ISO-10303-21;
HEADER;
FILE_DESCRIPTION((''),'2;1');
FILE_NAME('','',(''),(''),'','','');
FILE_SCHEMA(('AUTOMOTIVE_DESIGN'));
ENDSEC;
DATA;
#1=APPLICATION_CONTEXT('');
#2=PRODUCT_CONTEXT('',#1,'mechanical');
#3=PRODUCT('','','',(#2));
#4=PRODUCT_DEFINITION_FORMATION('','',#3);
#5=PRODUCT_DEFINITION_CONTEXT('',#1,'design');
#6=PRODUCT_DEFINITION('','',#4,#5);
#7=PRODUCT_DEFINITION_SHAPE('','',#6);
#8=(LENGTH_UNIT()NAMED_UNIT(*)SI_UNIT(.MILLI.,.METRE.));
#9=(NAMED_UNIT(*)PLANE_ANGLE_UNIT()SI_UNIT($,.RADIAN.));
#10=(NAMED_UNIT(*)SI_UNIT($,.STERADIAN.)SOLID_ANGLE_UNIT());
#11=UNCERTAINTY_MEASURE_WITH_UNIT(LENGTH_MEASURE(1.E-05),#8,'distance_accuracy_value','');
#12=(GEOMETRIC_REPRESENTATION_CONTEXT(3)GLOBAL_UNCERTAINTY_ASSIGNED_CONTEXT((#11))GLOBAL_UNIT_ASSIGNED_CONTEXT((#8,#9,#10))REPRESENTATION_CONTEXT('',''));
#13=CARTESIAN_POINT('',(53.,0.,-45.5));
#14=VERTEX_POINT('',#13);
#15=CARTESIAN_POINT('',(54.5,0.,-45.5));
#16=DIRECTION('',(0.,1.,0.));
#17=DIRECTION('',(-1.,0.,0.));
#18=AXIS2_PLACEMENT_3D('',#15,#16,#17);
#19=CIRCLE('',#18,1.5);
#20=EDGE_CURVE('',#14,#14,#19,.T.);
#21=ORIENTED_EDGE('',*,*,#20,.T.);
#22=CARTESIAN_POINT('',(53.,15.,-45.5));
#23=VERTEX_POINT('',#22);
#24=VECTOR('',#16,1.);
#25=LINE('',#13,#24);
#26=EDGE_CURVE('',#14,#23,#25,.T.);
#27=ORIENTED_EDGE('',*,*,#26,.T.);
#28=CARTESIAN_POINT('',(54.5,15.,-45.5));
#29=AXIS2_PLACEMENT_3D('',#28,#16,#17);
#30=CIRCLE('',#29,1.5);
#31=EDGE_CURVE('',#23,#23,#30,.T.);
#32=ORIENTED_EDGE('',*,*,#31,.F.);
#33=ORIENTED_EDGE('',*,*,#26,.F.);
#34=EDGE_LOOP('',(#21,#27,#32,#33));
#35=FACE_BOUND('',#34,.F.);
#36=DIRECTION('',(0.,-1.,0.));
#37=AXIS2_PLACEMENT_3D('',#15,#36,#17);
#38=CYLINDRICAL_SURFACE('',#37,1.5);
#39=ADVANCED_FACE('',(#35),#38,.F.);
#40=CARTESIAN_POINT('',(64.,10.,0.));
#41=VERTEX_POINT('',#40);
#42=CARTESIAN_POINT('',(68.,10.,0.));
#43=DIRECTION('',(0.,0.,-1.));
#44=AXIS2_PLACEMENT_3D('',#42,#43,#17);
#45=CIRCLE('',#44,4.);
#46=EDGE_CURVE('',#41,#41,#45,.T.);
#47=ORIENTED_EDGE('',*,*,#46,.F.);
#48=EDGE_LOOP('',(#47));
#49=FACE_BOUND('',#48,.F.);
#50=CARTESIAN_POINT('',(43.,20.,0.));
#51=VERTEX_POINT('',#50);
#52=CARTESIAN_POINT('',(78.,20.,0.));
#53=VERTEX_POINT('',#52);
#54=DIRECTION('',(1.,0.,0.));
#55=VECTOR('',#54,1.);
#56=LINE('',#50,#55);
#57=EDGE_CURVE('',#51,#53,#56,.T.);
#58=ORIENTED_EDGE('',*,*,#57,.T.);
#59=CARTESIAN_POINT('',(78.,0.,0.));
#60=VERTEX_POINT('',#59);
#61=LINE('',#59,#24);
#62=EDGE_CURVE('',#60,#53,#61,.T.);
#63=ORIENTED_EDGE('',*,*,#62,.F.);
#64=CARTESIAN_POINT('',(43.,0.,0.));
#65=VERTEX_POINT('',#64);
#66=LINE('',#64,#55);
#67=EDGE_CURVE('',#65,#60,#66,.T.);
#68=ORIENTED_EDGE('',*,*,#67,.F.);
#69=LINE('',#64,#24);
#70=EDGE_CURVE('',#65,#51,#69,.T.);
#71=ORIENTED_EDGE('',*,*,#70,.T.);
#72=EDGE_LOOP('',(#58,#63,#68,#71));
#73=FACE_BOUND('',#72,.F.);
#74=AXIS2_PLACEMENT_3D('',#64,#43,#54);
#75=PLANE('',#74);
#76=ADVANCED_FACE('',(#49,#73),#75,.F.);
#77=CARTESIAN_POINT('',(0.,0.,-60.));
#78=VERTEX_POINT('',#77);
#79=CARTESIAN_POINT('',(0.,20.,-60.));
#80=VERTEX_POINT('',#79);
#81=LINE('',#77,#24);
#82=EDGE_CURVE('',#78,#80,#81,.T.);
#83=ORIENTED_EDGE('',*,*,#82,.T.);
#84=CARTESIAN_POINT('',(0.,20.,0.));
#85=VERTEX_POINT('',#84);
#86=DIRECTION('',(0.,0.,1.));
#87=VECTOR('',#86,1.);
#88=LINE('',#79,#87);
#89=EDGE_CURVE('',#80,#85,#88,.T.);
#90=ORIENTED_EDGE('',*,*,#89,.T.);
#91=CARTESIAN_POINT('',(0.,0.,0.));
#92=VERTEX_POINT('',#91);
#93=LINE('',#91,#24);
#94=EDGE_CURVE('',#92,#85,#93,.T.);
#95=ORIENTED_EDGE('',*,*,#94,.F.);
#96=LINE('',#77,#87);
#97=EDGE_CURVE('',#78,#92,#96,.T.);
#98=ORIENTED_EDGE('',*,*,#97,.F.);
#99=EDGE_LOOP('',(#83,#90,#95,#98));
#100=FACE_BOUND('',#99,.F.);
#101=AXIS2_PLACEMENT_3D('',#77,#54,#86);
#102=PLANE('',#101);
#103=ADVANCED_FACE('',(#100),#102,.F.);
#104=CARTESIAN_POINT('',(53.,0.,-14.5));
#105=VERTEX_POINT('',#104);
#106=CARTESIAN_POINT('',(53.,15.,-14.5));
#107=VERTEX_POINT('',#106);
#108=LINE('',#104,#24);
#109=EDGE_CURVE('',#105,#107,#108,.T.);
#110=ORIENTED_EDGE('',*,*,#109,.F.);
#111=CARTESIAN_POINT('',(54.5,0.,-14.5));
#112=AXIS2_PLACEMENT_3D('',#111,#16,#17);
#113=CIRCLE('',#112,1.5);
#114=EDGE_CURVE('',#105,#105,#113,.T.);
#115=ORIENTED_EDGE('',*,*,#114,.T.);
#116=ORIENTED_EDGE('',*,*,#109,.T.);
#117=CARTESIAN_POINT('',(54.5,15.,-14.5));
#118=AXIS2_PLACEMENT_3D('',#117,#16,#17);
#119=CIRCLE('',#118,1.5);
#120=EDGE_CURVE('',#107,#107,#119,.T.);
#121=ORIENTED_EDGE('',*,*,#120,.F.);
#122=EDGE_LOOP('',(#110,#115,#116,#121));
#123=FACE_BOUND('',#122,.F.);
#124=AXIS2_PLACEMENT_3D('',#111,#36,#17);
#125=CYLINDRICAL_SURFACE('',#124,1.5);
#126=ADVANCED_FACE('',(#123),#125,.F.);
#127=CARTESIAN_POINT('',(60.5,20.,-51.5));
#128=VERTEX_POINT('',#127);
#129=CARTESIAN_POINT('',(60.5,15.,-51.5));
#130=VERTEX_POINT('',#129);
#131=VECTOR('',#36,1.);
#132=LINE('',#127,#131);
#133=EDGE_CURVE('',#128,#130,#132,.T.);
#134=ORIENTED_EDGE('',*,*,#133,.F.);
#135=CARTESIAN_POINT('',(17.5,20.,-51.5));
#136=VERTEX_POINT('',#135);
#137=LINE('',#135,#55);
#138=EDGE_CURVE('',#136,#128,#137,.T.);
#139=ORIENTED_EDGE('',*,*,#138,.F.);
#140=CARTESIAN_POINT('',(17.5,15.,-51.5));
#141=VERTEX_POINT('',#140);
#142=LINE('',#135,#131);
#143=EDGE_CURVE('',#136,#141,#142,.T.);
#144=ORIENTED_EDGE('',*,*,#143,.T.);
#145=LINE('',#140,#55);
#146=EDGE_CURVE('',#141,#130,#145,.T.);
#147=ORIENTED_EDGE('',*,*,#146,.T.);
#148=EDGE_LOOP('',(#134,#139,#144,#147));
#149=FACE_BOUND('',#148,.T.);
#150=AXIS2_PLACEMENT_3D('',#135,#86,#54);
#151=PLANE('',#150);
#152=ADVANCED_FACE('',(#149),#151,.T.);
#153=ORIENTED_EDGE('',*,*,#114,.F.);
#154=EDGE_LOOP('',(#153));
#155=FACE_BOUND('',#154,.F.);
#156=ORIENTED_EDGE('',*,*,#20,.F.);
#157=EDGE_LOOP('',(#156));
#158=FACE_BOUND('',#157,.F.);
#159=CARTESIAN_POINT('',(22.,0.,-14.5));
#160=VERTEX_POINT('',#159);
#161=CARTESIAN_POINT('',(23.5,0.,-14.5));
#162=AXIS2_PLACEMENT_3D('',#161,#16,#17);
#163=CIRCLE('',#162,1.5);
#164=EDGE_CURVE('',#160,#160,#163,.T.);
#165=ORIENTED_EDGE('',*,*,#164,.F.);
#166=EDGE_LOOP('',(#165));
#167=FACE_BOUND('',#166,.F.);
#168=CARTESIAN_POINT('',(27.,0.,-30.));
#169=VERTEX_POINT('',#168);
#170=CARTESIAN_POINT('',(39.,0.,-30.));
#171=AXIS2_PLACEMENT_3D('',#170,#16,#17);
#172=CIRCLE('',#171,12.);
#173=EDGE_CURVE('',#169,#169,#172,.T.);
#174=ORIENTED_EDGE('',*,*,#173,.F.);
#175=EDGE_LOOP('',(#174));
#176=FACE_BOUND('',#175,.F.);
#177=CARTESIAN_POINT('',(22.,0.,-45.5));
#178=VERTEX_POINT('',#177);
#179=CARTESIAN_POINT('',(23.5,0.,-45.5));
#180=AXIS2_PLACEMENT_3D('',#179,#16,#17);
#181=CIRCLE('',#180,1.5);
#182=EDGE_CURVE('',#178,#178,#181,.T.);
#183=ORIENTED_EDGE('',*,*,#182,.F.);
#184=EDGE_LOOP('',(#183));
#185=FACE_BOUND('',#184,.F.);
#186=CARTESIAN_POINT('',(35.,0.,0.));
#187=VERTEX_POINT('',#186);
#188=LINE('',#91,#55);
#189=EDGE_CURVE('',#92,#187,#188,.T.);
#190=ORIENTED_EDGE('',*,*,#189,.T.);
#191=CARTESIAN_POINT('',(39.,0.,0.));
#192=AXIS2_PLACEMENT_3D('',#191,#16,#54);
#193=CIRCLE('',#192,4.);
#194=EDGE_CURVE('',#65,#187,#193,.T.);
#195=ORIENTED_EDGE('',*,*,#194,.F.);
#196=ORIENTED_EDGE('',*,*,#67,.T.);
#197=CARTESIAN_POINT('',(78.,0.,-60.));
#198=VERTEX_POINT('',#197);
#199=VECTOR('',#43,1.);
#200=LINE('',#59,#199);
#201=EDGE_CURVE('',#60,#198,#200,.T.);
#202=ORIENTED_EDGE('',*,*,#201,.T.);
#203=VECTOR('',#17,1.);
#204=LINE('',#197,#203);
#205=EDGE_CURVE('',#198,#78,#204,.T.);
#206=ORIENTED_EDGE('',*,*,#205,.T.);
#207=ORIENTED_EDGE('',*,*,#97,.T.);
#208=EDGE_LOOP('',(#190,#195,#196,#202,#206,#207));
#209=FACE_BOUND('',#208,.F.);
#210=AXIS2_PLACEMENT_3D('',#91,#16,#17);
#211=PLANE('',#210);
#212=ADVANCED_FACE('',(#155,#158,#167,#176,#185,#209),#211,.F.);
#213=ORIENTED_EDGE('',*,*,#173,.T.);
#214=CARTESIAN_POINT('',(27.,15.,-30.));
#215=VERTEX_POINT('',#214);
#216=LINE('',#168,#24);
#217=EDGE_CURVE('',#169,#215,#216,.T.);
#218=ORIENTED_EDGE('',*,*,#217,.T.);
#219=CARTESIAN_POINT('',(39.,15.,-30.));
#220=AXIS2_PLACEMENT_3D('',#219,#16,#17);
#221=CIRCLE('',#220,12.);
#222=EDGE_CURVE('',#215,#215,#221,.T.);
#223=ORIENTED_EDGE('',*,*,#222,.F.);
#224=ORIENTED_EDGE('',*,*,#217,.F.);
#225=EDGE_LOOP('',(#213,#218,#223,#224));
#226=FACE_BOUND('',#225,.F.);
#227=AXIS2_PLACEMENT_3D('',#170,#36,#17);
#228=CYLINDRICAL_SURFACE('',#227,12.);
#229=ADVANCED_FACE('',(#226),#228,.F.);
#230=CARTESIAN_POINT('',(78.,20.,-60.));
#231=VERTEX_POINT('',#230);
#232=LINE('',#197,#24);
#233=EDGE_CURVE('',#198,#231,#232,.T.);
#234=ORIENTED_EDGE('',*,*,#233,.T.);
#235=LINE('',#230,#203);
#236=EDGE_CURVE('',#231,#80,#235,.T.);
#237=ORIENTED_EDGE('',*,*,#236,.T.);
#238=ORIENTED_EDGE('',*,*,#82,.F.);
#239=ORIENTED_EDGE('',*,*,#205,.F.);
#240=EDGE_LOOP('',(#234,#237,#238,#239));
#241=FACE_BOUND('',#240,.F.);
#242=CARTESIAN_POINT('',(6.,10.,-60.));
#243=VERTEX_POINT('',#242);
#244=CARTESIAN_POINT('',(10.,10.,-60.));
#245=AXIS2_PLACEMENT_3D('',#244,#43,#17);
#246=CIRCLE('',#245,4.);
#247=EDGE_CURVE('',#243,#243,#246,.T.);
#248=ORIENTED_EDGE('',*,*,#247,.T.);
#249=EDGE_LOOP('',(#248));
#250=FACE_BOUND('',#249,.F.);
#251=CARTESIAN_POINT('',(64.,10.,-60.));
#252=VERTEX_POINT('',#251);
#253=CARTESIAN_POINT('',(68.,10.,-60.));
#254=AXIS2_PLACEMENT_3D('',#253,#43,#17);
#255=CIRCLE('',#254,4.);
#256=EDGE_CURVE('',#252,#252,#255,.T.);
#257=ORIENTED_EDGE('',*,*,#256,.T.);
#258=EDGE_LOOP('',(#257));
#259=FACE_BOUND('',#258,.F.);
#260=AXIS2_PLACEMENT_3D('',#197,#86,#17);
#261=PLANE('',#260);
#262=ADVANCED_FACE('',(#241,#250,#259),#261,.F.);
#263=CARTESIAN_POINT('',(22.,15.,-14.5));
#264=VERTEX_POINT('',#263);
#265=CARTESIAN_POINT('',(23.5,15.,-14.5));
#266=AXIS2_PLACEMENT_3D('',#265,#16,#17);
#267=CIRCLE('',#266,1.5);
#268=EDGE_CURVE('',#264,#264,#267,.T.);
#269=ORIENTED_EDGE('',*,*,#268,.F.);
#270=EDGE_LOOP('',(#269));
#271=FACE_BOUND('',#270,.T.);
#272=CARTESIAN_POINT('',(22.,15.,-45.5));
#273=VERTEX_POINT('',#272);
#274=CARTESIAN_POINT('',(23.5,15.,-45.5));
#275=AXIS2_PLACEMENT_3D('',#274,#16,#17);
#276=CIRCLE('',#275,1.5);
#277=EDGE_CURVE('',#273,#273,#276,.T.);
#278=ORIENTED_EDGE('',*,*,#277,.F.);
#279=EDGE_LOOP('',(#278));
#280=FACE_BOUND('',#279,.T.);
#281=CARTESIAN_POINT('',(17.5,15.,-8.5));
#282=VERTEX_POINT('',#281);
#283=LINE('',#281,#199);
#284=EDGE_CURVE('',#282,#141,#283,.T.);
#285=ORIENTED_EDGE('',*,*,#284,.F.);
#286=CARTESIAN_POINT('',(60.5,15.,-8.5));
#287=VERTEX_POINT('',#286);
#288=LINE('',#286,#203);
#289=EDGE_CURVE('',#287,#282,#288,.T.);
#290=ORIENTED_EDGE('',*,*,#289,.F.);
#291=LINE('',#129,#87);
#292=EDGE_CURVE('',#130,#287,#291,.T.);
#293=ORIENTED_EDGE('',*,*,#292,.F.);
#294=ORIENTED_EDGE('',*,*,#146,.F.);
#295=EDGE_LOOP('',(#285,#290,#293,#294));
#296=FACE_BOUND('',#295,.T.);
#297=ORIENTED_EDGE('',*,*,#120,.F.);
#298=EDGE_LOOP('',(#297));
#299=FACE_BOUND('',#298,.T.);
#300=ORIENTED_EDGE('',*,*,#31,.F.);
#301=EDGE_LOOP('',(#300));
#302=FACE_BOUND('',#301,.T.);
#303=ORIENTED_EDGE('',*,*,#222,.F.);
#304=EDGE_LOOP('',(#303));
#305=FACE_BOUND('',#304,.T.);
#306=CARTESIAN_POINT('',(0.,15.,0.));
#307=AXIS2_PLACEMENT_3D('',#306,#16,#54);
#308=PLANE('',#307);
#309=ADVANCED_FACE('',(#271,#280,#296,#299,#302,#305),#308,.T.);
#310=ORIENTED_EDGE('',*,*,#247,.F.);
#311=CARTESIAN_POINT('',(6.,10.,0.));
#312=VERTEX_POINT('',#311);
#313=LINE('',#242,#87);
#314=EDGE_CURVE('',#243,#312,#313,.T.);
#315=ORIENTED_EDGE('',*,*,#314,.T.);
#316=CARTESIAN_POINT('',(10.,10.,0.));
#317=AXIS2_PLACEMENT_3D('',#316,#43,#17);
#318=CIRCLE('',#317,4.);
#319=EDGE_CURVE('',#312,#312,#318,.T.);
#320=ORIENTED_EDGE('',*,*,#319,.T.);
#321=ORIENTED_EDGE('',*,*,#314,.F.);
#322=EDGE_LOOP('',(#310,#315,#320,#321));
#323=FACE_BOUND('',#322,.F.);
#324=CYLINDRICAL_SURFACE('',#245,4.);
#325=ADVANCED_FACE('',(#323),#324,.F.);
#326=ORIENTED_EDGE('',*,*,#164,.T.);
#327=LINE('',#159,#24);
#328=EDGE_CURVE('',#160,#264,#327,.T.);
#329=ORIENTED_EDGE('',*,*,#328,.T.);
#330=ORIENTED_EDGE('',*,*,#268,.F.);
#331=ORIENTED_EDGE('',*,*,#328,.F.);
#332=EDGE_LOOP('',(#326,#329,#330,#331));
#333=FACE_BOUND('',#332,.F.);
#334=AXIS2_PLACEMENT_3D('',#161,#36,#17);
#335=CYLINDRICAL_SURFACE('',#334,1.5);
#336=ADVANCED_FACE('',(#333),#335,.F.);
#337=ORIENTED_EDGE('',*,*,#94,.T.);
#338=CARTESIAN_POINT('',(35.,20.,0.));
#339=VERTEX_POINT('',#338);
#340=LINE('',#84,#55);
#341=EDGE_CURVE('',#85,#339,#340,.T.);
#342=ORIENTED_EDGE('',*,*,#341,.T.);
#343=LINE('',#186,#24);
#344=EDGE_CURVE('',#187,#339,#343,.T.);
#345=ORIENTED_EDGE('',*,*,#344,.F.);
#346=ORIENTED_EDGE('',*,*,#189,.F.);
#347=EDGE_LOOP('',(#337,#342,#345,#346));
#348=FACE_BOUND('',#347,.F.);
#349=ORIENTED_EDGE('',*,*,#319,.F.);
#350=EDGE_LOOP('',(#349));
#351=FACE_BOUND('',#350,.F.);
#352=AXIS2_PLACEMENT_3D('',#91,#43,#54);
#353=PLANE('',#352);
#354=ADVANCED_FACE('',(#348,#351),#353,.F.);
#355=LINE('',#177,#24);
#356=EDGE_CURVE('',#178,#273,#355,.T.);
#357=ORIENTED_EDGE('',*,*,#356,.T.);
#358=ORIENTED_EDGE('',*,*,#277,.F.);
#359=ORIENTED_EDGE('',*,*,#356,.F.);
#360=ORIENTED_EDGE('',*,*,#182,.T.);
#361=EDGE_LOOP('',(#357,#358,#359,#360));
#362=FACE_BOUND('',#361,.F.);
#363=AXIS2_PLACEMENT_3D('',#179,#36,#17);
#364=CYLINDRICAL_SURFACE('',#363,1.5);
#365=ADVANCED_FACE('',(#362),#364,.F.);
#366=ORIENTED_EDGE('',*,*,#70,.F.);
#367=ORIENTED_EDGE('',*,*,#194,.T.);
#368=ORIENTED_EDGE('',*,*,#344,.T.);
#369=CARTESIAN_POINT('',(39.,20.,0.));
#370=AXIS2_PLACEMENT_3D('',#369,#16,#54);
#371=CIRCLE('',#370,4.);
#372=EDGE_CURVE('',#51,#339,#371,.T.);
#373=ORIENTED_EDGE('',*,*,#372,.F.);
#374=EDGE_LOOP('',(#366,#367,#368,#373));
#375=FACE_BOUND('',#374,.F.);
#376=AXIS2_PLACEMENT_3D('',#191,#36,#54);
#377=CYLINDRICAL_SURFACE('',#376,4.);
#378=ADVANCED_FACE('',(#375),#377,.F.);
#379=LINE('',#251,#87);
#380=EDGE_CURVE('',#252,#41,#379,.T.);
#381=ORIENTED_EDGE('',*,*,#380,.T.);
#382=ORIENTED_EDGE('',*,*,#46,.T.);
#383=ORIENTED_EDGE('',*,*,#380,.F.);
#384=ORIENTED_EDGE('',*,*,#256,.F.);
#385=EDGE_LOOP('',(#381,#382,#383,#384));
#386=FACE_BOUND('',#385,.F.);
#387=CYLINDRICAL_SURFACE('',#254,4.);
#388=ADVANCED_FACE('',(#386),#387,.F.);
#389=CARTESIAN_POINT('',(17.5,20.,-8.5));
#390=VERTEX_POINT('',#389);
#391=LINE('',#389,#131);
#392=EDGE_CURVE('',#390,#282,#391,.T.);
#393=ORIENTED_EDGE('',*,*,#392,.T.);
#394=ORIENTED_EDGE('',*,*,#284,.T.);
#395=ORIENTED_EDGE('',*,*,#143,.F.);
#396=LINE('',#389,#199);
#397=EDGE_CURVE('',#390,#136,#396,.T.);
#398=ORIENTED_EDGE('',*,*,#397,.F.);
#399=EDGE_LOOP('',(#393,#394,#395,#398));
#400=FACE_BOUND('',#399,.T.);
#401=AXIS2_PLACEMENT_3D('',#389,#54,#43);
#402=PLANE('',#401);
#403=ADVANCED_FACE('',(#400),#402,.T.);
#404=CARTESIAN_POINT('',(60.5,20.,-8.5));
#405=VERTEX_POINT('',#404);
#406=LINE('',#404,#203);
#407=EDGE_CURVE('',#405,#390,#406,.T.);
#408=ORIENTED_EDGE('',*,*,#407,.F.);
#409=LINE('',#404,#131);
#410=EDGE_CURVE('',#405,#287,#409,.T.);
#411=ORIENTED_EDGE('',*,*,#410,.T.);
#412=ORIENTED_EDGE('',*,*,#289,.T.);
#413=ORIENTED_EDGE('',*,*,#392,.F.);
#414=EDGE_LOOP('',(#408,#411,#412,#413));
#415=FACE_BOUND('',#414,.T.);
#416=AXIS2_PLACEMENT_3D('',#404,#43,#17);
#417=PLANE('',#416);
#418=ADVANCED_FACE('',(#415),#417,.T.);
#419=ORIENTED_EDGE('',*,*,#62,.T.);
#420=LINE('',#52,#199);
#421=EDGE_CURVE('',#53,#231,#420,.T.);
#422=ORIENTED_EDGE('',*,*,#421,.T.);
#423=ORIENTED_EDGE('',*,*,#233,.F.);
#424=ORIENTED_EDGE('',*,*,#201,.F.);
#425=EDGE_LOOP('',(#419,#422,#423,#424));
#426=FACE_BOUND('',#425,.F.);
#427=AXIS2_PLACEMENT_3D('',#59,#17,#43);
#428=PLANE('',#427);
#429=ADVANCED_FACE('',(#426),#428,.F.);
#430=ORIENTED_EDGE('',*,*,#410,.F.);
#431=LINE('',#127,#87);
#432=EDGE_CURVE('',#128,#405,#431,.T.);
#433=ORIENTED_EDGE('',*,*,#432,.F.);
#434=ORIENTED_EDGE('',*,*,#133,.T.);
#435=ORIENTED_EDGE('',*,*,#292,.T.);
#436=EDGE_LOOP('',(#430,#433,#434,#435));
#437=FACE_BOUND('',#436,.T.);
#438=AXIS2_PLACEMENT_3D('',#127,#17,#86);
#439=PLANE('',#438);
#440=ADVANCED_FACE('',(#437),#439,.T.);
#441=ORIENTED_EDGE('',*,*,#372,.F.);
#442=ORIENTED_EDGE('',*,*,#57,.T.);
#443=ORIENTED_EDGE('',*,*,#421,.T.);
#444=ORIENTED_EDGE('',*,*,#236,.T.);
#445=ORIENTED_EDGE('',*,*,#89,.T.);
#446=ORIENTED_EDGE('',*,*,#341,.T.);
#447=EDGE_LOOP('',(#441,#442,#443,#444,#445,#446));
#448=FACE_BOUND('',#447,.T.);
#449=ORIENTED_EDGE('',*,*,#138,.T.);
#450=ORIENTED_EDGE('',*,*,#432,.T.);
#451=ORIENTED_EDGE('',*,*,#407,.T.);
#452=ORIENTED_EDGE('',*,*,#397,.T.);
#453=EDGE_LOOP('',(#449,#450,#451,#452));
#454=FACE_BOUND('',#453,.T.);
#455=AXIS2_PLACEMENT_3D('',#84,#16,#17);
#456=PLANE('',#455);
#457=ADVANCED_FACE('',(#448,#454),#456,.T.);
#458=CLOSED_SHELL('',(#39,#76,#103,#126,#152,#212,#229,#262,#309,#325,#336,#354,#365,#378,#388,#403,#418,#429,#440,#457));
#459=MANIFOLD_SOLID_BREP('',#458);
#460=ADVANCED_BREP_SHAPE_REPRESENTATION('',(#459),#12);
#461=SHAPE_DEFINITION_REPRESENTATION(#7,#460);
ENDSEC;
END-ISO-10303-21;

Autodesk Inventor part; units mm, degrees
ref_plane "YZ Plane" through (0, 0, 0) normal (1, 0, 0) x (0, 1, 0)
ref_plane "XZ Plane" through (0, 0, 0) normal (0, 1, 0) x (-1, 0, 0)
ref_plane "XY Plane" through (0, 0, 0) normal (0, 0, 1) x (1, 0, 0)
sketch "Sketch1" plane through (0, 0, 0) normal (0, 1, 0) x (-1, 0, 0)
  line L0 (-78, 0) -> (-78, -60)
  line L1 (-78, -60) -> (0, -60)
  line L2 (0, -60) -> (0, 0)
  arc A0 (-43, 0) -> (-35, 0) centre (-39, 0) ccw
  circle A1 centre (-39, -30) radius 12
  line L3 (-23.5, -14.5) -> (-54.5, -14.5)
  circle A2 centre (-23.5, -45.5) radius 1.5
  circle A3 centre (-54.5, -45.5) radius 1.5
  circle A4 centre (-54.5, -14.5) radius 1.5
  circle A5 centre (-23.5, -14.5) radius 1.5
  line L4 (0, 0) -> (-35, 0)
  line L5 (-43, 0) -> (-78, 0)
  dimension "d1" = 60
  dimension "d2" = 78
  dimension "d3" = 8
  dimension "d5" = 24
  dimension "d15" = 31
  dimension "d16" = 3
  dimension "d17" = 3
  dimension "d18" = 3
  dimension "d19" = 3
extrude "Extrusion1" add sketch "Sketch1" along normal blind 20
sketch "Sketch2" plane through (78, 0, -60) normal (0, 0, -1) x (-1, 0, 0)
  circle A0 centre (10, 10) radius 4
  circle A1 centre (68, 10) radius 4
  dimension "d24" = 8
  dimension "d25" = 8
extrude "Extrusion2" cut sketch "Sketch2" against normal blind 100
sketch "Sketch3" plane through (0, 20, 0) normal (0, 1, 0) x (1, 0, 0)
  circle A0 centre (39, 30) radius 12 projected
  circle A1 centre (23.5, 14.5) radius 1.5 projected
  circle A2 centre (54.5, 14.5) radius 1.5 projected
  circle A3 centre (54.5, 45.5) radius 1.5 projected
  circle A4 centre (23.5, 45.5) radius 1.5 projected
  line L0 (60.5, 8.5) -> (17.5, 8.5)
  line L1 (17.5, 8.5) -> (17.5, 51.5)
  line L2 (17.5, 51.5) -> (60.5, 51.5)
  line L3 (60.5, 51.5) -> (60.5, 8.5)
  line L4 (60.5, 8.5) -> (17.5, 51.5) construction
  line L5 (17.5, 8.5) -> (60.5, 51.5) construction
  dimension "d28" = 43
  dimension "d29" = 43
extrude "Extrusion3" cut sketch "Sketch3" against normal blind 5
properties part number "Z_MotorMount_RodHolder_V2" material "Birch"
